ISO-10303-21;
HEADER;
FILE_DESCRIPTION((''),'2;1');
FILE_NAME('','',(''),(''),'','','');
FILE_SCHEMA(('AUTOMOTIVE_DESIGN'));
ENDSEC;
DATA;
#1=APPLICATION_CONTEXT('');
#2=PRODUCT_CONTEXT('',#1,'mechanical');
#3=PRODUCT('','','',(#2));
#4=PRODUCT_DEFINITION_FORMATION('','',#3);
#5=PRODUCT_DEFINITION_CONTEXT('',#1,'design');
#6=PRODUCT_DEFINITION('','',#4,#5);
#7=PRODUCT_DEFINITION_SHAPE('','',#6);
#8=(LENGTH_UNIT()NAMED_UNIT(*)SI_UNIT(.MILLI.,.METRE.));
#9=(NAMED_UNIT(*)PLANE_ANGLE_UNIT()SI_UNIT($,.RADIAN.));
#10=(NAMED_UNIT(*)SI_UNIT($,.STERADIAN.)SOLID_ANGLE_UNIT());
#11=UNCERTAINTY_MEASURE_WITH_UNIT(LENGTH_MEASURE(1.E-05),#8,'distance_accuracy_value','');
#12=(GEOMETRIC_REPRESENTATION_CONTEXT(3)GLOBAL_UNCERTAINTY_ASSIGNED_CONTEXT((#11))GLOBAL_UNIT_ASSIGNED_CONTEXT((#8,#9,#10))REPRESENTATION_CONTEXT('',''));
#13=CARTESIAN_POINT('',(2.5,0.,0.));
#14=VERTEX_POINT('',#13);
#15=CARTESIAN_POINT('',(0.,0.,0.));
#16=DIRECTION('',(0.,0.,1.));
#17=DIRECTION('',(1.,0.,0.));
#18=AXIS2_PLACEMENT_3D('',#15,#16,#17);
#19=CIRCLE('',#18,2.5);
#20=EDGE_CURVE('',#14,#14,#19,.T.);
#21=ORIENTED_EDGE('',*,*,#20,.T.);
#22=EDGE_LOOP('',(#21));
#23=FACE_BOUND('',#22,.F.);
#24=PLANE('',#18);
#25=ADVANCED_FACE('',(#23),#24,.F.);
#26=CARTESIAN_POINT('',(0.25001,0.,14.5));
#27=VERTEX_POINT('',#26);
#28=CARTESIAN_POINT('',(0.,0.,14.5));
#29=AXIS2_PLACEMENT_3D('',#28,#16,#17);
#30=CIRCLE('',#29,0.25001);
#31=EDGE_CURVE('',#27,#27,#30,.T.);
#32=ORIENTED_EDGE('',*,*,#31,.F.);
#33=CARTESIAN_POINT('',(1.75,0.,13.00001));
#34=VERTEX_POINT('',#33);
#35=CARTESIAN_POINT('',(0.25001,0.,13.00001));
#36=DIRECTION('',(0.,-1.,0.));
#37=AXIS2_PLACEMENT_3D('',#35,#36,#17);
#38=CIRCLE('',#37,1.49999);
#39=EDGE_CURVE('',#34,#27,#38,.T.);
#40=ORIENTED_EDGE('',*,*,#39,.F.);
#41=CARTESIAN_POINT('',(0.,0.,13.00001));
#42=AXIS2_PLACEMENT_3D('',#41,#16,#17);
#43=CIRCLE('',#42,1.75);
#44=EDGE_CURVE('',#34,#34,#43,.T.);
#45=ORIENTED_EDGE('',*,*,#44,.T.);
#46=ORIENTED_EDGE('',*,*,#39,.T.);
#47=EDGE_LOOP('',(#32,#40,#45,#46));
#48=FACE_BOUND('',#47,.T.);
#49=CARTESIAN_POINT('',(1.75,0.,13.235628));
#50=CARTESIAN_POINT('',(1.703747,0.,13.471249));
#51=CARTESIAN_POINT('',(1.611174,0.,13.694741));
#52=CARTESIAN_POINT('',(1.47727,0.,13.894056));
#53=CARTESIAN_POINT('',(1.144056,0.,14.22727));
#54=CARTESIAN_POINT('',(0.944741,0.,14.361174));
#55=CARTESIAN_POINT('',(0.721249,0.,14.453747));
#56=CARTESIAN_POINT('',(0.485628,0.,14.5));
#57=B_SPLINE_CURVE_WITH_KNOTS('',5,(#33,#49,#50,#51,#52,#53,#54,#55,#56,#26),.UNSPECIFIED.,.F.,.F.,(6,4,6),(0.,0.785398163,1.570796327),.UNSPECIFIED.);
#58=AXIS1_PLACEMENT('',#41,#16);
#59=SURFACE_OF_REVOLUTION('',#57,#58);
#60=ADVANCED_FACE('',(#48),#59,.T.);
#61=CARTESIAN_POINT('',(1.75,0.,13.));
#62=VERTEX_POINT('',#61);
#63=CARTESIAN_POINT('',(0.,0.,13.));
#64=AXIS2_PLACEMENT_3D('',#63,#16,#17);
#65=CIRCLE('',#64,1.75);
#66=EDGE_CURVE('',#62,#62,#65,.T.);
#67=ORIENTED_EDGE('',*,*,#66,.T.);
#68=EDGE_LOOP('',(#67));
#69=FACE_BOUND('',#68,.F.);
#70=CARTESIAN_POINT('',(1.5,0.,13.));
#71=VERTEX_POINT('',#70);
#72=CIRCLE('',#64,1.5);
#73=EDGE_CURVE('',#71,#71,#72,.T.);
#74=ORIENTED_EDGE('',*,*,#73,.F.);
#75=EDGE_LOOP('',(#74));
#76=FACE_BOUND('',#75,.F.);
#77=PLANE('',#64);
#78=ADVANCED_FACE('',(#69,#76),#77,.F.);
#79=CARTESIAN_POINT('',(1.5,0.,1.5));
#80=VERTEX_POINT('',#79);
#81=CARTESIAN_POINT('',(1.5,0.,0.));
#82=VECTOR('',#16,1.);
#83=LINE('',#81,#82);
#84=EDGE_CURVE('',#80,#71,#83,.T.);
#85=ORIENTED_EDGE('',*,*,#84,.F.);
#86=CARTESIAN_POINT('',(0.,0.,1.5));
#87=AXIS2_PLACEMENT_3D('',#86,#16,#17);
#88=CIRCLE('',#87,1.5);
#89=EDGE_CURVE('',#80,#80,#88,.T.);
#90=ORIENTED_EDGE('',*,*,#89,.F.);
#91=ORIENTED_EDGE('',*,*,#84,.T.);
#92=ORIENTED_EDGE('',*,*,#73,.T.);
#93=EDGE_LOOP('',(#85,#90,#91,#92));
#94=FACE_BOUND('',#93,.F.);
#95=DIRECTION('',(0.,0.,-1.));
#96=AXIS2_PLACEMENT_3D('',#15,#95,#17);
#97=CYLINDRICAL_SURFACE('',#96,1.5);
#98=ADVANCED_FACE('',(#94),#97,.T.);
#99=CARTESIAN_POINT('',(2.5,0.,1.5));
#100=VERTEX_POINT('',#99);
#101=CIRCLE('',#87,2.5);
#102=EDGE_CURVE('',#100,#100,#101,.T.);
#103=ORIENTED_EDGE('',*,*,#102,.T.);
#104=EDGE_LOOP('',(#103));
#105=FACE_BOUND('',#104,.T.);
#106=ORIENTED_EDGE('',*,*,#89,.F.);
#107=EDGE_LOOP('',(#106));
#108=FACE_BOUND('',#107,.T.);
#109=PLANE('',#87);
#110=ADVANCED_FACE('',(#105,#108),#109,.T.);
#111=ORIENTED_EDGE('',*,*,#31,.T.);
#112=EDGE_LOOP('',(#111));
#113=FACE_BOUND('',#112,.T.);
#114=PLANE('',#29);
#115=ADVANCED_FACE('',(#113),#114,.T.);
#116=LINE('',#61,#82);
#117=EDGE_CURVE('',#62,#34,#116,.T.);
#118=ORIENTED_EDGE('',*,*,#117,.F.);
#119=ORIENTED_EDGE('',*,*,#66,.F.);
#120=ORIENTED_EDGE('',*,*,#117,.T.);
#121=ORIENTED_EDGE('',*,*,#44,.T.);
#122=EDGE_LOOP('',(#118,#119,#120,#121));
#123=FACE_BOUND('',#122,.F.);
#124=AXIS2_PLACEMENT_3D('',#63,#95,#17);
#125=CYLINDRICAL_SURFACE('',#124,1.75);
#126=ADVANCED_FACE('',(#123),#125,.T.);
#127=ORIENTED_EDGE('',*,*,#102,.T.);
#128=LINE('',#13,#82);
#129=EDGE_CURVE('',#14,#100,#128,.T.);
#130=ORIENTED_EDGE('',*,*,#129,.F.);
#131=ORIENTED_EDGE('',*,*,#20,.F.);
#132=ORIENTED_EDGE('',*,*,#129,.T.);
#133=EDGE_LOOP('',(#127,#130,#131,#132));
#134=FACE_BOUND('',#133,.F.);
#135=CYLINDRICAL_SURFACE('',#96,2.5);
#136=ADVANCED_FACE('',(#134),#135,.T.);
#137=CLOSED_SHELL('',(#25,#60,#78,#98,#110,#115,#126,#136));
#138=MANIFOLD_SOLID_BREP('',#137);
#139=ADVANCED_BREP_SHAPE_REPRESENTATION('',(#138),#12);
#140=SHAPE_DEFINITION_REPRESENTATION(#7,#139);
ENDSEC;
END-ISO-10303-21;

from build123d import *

# Parameters (mm, degrees)
F0_R     = 1.5
F1_DEPTH = 13
F0_R_2   = 2.5
F2_DEPTH = 1.5
F3_R     = 1.75
F4_DEPTH = 1.5
F5_R     = 1.49999


# Not quite as in the source:
# - a fillet or chamfer is up to 0.001 mm smaller than in the source, because OpenCascade refuses the exact size


with BuildPart() as f1:
    # F0 (on Top) → F1 (new body)
    with BuildSketch(Plane.XY):
        Circle(F0_R)
    extrude(amount=F1_DEPTH)

    # F0 (on Top) → F2 (join)
    with BuildSketch(Plane.XY):
        Circle(F0_R_2)
        Circle(F0_R, mode=Mode.SUBTRACT)
    extrude(amount=F2_DEPTH)

    # F3 (on face) → F4 (join)
    with BuildSketch(Plane.XY.offset(13)):
        Circle(F3_R)
    extrude(amount=F4_DEPTH)

    # F5 (radius 1.5 in the source; OpenCascade refuses exactly that, so slightly less here)
    f5_edges = [f1.edges().sort_by_distance(p)[0] for p in [
        (-1.75, 0, 14.5),
    ]]
    fillet(f5_edges, radius=F5_R)


solid = f1.part
